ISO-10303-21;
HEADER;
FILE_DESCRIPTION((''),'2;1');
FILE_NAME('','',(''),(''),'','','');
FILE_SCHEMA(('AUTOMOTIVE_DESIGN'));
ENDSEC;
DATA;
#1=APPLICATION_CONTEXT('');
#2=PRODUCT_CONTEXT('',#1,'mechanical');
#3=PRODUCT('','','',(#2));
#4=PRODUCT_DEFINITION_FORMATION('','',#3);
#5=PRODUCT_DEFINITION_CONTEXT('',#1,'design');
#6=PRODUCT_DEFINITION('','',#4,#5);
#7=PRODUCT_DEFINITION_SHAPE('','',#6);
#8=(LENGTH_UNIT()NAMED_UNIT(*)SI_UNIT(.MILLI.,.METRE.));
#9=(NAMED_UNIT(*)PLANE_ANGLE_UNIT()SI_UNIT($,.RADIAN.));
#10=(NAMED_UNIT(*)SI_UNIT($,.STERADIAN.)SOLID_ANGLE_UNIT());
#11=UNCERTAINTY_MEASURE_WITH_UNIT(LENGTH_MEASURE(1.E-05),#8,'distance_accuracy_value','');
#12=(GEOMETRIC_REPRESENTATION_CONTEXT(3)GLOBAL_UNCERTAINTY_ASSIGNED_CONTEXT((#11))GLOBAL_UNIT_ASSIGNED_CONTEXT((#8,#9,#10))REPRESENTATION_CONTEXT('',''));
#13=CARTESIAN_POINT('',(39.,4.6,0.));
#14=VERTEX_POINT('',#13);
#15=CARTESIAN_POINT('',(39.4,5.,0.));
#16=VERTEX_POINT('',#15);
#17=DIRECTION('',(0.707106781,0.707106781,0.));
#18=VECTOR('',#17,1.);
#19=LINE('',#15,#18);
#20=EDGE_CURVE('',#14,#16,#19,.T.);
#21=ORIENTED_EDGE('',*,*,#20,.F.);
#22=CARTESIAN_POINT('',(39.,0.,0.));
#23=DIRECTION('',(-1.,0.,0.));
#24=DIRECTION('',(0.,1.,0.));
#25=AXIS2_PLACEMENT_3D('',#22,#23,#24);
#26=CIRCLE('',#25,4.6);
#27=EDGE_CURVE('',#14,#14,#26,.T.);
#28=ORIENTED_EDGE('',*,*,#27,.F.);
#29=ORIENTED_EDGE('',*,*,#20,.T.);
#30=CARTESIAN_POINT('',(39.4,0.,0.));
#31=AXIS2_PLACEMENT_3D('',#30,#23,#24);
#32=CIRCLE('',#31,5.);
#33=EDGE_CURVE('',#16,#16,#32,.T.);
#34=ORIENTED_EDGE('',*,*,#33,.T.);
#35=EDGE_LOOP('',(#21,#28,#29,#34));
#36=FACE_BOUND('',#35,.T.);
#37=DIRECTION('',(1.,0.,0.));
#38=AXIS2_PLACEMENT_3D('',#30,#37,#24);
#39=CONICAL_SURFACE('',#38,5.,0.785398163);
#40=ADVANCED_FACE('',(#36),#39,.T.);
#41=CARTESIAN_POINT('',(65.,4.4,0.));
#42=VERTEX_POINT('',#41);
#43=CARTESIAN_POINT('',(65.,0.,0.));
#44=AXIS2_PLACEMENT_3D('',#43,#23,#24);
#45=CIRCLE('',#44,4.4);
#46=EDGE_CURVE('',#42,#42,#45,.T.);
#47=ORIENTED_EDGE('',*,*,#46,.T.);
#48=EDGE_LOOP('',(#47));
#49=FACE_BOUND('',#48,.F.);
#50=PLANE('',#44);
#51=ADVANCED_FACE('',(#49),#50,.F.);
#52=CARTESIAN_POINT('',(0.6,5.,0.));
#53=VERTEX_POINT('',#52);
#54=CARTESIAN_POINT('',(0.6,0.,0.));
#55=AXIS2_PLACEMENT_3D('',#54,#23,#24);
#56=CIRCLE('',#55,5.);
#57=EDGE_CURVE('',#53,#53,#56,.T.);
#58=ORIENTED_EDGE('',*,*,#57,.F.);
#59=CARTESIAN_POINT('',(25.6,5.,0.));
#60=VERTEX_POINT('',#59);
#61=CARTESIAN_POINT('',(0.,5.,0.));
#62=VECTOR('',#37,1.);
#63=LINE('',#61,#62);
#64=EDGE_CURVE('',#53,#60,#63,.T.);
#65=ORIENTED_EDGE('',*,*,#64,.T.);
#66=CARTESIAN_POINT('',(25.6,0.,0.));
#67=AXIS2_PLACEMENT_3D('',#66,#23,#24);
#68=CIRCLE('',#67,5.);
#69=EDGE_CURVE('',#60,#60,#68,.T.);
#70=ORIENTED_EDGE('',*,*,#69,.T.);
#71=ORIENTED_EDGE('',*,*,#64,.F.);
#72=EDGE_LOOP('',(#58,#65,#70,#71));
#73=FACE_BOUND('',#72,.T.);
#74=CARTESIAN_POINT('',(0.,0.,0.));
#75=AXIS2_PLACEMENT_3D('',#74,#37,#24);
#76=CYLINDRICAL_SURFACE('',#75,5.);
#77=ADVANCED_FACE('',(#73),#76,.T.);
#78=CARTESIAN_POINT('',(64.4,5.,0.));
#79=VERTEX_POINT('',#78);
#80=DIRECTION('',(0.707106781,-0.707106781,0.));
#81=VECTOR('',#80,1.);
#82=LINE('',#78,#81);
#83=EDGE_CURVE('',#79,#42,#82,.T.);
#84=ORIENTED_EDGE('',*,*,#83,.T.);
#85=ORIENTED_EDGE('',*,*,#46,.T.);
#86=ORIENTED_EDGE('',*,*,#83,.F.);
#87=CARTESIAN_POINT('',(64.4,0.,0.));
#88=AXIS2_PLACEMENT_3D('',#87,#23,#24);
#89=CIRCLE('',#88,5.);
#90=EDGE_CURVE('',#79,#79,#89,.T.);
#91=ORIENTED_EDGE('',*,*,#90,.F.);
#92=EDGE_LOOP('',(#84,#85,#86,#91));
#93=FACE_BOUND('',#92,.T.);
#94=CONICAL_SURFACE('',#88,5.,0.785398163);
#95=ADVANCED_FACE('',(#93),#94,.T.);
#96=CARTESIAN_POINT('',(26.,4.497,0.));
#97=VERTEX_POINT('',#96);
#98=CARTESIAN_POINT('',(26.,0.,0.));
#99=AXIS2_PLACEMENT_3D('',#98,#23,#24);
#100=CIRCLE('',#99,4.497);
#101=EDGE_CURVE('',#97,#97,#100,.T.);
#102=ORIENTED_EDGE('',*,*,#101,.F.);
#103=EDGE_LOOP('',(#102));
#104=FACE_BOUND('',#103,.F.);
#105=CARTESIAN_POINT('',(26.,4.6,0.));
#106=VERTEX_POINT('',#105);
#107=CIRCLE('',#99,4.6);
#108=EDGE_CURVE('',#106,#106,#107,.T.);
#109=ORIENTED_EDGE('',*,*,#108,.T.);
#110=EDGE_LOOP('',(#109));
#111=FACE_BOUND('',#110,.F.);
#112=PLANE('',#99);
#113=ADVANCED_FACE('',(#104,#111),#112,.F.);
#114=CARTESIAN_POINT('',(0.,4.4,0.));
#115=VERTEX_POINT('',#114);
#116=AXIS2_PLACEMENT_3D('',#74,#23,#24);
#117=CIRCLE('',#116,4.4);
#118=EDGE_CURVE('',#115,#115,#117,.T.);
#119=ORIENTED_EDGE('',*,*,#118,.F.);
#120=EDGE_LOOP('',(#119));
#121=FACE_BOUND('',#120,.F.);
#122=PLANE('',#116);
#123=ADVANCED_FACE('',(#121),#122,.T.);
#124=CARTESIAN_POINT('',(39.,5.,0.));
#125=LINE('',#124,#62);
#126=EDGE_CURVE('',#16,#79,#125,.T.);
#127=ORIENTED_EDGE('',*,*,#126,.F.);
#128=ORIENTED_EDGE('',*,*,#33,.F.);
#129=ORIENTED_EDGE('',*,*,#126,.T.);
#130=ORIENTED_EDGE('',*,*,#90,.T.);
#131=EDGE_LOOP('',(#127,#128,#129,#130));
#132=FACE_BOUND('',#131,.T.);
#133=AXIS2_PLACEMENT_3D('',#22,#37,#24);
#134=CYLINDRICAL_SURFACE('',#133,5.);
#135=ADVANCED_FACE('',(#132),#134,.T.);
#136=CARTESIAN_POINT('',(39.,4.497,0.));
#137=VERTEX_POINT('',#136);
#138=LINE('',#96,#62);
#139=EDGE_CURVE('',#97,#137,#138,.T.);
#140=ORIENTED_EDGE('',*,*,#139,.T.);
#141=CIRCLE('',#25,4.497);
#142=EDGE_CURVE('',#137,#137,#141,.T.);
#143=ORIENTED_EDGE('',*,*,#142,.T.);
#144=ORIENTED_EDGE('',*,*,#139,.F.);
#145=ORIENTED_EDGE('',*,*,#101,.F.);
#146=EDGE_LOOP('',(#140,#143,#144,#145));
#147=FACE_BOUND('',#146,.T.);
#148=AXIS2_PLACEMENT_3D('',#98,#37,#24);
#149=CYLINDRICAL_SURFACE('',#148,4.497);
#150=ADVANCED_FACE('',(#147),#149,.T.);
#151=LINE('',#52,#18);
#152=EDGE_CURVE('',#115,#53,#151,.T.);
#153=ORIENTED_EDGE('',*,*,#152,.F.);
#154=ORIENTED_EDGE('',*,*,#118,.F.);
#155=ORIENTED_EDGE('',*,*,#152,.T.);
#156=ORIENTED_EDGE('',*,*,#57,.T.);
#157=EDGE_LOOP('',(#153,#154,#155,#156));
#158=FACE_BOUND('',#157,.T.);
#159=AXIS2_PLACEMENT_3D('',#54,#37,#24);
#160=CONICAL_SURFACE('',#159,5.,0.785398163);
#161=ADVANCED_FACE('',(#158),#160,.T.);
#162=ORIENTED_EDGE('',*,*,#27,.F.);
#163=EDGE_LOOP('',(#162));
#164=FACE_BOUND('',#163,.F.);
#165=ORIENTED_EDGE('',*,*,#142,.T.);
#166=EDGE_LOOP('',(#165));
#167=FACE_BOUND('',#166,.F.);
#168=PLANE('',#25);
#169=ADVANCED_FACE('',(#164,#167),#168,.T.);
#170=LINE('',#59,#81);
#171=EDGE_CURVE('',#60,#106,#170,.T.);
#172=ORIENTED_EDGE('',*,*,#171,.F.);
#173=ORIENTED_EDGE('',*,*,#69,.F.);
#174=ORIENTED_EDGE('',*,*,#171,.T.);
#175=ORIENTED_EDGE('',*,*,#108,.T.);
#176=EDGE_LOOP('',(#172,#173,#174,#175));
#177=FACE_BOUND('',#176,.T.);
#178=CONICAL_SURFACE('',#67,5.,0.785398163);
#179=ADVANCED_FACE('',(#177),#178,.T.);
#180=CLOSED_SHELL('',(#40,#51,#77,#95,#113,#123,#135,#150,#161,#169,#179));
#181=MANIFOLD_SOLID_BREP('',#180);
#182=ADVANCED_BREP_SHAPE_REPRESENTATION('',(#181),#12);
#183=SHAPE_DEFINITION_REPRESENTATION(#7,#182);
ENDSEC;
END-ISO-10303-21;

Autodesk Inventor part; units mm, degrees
ref_plane "YZ Plane" through (0, 0, 0) normal (1, 0, 0) x (0, 1, 0)
ref_plane "XZ Plane" through (0, 0, 0) normal (0, 1, 0) x (-1, 0, 0)
sketch "Sketch1" plane through (0, 0, 0) normal (0, 0, 1) x (1, 0, 0)
  line L0 (0, 0) -> (0, 5)
  line L1 (0, 5) -> (26, 5)
  line L2 (26, 5) -> (26, 4.497)
  line L3 (26, 4.497) -> (39, 4.497)
  line L4 (39, 4.497) -> (39, 5)
  line L5 (39, 5) -> (65, 5)
  line L6 (65, 5) -> (65, 0)
  line L7 (65, 0) -> (0, 0)
  dimension "d1" = 10
  dimension "d3" = 8.994
  dimension "d4" = 26
  dimension "d6" = 26
  dimension "d43" = 65
revolve "Вращение1" add sketch "Sketch1" angle 360 about axis through (65, 0, 0) along (-1, 0, 0)
thread "Резьба1" size "M10x1.5" class "6g" standard "ISO Metric profile" length 26
thread "Резьба2" size "M10x1.5" class "6g" standard "ISO Metric profile" length 26
chamfer "Фаска1" distance 0.6 angle 45 2 edges at (0, -5, 0) (65, -5, 0)
chamfer "Фаска2" distance 0.4 angle 45 2 edges at (26, -5, 0) (39, -5, 0)
ref_plane "Work Plane1" through (26, 0, 0) normal (1, 0, 0) x (0, 1, 0)
sketch "Sketch2" plane through (26, 0, 0) normal (1, 0, 0) x (0, 1, 0)
  circle A0 centre (0, 0) radius 5
  point P0 (0, 0)
  dimension "d35" = 10
boundary_patch "Участок поверхности1"
equation "\"d8\" = b"
equation "\"d29\" = b"
equation "\"d31\" = C_"
equation "\"d37\" = C2_"
equation "\"d1\" = d"
equation "\"d3\" = d2"
equation "\"d4\" = b"
equation "\"d6\" = b"
equation "\"d43\" = L"
equation "\"d35\" = d"
equation "\"C_\" = 0.6"
equation "\"d\" = 10"
equation "\"d2\" = 8.994"
equation "\"L\" = 65"
equation "\"b\" = 26"
equation "\"d34\" = -b"
equation "\"C2_\" = 0.4"
equation "\"Grip_Length\" = 13"
properties part number "Шпилька 2 M10-6g×65 ГОСТ 22042-76" material "Сталь, мягкая"
